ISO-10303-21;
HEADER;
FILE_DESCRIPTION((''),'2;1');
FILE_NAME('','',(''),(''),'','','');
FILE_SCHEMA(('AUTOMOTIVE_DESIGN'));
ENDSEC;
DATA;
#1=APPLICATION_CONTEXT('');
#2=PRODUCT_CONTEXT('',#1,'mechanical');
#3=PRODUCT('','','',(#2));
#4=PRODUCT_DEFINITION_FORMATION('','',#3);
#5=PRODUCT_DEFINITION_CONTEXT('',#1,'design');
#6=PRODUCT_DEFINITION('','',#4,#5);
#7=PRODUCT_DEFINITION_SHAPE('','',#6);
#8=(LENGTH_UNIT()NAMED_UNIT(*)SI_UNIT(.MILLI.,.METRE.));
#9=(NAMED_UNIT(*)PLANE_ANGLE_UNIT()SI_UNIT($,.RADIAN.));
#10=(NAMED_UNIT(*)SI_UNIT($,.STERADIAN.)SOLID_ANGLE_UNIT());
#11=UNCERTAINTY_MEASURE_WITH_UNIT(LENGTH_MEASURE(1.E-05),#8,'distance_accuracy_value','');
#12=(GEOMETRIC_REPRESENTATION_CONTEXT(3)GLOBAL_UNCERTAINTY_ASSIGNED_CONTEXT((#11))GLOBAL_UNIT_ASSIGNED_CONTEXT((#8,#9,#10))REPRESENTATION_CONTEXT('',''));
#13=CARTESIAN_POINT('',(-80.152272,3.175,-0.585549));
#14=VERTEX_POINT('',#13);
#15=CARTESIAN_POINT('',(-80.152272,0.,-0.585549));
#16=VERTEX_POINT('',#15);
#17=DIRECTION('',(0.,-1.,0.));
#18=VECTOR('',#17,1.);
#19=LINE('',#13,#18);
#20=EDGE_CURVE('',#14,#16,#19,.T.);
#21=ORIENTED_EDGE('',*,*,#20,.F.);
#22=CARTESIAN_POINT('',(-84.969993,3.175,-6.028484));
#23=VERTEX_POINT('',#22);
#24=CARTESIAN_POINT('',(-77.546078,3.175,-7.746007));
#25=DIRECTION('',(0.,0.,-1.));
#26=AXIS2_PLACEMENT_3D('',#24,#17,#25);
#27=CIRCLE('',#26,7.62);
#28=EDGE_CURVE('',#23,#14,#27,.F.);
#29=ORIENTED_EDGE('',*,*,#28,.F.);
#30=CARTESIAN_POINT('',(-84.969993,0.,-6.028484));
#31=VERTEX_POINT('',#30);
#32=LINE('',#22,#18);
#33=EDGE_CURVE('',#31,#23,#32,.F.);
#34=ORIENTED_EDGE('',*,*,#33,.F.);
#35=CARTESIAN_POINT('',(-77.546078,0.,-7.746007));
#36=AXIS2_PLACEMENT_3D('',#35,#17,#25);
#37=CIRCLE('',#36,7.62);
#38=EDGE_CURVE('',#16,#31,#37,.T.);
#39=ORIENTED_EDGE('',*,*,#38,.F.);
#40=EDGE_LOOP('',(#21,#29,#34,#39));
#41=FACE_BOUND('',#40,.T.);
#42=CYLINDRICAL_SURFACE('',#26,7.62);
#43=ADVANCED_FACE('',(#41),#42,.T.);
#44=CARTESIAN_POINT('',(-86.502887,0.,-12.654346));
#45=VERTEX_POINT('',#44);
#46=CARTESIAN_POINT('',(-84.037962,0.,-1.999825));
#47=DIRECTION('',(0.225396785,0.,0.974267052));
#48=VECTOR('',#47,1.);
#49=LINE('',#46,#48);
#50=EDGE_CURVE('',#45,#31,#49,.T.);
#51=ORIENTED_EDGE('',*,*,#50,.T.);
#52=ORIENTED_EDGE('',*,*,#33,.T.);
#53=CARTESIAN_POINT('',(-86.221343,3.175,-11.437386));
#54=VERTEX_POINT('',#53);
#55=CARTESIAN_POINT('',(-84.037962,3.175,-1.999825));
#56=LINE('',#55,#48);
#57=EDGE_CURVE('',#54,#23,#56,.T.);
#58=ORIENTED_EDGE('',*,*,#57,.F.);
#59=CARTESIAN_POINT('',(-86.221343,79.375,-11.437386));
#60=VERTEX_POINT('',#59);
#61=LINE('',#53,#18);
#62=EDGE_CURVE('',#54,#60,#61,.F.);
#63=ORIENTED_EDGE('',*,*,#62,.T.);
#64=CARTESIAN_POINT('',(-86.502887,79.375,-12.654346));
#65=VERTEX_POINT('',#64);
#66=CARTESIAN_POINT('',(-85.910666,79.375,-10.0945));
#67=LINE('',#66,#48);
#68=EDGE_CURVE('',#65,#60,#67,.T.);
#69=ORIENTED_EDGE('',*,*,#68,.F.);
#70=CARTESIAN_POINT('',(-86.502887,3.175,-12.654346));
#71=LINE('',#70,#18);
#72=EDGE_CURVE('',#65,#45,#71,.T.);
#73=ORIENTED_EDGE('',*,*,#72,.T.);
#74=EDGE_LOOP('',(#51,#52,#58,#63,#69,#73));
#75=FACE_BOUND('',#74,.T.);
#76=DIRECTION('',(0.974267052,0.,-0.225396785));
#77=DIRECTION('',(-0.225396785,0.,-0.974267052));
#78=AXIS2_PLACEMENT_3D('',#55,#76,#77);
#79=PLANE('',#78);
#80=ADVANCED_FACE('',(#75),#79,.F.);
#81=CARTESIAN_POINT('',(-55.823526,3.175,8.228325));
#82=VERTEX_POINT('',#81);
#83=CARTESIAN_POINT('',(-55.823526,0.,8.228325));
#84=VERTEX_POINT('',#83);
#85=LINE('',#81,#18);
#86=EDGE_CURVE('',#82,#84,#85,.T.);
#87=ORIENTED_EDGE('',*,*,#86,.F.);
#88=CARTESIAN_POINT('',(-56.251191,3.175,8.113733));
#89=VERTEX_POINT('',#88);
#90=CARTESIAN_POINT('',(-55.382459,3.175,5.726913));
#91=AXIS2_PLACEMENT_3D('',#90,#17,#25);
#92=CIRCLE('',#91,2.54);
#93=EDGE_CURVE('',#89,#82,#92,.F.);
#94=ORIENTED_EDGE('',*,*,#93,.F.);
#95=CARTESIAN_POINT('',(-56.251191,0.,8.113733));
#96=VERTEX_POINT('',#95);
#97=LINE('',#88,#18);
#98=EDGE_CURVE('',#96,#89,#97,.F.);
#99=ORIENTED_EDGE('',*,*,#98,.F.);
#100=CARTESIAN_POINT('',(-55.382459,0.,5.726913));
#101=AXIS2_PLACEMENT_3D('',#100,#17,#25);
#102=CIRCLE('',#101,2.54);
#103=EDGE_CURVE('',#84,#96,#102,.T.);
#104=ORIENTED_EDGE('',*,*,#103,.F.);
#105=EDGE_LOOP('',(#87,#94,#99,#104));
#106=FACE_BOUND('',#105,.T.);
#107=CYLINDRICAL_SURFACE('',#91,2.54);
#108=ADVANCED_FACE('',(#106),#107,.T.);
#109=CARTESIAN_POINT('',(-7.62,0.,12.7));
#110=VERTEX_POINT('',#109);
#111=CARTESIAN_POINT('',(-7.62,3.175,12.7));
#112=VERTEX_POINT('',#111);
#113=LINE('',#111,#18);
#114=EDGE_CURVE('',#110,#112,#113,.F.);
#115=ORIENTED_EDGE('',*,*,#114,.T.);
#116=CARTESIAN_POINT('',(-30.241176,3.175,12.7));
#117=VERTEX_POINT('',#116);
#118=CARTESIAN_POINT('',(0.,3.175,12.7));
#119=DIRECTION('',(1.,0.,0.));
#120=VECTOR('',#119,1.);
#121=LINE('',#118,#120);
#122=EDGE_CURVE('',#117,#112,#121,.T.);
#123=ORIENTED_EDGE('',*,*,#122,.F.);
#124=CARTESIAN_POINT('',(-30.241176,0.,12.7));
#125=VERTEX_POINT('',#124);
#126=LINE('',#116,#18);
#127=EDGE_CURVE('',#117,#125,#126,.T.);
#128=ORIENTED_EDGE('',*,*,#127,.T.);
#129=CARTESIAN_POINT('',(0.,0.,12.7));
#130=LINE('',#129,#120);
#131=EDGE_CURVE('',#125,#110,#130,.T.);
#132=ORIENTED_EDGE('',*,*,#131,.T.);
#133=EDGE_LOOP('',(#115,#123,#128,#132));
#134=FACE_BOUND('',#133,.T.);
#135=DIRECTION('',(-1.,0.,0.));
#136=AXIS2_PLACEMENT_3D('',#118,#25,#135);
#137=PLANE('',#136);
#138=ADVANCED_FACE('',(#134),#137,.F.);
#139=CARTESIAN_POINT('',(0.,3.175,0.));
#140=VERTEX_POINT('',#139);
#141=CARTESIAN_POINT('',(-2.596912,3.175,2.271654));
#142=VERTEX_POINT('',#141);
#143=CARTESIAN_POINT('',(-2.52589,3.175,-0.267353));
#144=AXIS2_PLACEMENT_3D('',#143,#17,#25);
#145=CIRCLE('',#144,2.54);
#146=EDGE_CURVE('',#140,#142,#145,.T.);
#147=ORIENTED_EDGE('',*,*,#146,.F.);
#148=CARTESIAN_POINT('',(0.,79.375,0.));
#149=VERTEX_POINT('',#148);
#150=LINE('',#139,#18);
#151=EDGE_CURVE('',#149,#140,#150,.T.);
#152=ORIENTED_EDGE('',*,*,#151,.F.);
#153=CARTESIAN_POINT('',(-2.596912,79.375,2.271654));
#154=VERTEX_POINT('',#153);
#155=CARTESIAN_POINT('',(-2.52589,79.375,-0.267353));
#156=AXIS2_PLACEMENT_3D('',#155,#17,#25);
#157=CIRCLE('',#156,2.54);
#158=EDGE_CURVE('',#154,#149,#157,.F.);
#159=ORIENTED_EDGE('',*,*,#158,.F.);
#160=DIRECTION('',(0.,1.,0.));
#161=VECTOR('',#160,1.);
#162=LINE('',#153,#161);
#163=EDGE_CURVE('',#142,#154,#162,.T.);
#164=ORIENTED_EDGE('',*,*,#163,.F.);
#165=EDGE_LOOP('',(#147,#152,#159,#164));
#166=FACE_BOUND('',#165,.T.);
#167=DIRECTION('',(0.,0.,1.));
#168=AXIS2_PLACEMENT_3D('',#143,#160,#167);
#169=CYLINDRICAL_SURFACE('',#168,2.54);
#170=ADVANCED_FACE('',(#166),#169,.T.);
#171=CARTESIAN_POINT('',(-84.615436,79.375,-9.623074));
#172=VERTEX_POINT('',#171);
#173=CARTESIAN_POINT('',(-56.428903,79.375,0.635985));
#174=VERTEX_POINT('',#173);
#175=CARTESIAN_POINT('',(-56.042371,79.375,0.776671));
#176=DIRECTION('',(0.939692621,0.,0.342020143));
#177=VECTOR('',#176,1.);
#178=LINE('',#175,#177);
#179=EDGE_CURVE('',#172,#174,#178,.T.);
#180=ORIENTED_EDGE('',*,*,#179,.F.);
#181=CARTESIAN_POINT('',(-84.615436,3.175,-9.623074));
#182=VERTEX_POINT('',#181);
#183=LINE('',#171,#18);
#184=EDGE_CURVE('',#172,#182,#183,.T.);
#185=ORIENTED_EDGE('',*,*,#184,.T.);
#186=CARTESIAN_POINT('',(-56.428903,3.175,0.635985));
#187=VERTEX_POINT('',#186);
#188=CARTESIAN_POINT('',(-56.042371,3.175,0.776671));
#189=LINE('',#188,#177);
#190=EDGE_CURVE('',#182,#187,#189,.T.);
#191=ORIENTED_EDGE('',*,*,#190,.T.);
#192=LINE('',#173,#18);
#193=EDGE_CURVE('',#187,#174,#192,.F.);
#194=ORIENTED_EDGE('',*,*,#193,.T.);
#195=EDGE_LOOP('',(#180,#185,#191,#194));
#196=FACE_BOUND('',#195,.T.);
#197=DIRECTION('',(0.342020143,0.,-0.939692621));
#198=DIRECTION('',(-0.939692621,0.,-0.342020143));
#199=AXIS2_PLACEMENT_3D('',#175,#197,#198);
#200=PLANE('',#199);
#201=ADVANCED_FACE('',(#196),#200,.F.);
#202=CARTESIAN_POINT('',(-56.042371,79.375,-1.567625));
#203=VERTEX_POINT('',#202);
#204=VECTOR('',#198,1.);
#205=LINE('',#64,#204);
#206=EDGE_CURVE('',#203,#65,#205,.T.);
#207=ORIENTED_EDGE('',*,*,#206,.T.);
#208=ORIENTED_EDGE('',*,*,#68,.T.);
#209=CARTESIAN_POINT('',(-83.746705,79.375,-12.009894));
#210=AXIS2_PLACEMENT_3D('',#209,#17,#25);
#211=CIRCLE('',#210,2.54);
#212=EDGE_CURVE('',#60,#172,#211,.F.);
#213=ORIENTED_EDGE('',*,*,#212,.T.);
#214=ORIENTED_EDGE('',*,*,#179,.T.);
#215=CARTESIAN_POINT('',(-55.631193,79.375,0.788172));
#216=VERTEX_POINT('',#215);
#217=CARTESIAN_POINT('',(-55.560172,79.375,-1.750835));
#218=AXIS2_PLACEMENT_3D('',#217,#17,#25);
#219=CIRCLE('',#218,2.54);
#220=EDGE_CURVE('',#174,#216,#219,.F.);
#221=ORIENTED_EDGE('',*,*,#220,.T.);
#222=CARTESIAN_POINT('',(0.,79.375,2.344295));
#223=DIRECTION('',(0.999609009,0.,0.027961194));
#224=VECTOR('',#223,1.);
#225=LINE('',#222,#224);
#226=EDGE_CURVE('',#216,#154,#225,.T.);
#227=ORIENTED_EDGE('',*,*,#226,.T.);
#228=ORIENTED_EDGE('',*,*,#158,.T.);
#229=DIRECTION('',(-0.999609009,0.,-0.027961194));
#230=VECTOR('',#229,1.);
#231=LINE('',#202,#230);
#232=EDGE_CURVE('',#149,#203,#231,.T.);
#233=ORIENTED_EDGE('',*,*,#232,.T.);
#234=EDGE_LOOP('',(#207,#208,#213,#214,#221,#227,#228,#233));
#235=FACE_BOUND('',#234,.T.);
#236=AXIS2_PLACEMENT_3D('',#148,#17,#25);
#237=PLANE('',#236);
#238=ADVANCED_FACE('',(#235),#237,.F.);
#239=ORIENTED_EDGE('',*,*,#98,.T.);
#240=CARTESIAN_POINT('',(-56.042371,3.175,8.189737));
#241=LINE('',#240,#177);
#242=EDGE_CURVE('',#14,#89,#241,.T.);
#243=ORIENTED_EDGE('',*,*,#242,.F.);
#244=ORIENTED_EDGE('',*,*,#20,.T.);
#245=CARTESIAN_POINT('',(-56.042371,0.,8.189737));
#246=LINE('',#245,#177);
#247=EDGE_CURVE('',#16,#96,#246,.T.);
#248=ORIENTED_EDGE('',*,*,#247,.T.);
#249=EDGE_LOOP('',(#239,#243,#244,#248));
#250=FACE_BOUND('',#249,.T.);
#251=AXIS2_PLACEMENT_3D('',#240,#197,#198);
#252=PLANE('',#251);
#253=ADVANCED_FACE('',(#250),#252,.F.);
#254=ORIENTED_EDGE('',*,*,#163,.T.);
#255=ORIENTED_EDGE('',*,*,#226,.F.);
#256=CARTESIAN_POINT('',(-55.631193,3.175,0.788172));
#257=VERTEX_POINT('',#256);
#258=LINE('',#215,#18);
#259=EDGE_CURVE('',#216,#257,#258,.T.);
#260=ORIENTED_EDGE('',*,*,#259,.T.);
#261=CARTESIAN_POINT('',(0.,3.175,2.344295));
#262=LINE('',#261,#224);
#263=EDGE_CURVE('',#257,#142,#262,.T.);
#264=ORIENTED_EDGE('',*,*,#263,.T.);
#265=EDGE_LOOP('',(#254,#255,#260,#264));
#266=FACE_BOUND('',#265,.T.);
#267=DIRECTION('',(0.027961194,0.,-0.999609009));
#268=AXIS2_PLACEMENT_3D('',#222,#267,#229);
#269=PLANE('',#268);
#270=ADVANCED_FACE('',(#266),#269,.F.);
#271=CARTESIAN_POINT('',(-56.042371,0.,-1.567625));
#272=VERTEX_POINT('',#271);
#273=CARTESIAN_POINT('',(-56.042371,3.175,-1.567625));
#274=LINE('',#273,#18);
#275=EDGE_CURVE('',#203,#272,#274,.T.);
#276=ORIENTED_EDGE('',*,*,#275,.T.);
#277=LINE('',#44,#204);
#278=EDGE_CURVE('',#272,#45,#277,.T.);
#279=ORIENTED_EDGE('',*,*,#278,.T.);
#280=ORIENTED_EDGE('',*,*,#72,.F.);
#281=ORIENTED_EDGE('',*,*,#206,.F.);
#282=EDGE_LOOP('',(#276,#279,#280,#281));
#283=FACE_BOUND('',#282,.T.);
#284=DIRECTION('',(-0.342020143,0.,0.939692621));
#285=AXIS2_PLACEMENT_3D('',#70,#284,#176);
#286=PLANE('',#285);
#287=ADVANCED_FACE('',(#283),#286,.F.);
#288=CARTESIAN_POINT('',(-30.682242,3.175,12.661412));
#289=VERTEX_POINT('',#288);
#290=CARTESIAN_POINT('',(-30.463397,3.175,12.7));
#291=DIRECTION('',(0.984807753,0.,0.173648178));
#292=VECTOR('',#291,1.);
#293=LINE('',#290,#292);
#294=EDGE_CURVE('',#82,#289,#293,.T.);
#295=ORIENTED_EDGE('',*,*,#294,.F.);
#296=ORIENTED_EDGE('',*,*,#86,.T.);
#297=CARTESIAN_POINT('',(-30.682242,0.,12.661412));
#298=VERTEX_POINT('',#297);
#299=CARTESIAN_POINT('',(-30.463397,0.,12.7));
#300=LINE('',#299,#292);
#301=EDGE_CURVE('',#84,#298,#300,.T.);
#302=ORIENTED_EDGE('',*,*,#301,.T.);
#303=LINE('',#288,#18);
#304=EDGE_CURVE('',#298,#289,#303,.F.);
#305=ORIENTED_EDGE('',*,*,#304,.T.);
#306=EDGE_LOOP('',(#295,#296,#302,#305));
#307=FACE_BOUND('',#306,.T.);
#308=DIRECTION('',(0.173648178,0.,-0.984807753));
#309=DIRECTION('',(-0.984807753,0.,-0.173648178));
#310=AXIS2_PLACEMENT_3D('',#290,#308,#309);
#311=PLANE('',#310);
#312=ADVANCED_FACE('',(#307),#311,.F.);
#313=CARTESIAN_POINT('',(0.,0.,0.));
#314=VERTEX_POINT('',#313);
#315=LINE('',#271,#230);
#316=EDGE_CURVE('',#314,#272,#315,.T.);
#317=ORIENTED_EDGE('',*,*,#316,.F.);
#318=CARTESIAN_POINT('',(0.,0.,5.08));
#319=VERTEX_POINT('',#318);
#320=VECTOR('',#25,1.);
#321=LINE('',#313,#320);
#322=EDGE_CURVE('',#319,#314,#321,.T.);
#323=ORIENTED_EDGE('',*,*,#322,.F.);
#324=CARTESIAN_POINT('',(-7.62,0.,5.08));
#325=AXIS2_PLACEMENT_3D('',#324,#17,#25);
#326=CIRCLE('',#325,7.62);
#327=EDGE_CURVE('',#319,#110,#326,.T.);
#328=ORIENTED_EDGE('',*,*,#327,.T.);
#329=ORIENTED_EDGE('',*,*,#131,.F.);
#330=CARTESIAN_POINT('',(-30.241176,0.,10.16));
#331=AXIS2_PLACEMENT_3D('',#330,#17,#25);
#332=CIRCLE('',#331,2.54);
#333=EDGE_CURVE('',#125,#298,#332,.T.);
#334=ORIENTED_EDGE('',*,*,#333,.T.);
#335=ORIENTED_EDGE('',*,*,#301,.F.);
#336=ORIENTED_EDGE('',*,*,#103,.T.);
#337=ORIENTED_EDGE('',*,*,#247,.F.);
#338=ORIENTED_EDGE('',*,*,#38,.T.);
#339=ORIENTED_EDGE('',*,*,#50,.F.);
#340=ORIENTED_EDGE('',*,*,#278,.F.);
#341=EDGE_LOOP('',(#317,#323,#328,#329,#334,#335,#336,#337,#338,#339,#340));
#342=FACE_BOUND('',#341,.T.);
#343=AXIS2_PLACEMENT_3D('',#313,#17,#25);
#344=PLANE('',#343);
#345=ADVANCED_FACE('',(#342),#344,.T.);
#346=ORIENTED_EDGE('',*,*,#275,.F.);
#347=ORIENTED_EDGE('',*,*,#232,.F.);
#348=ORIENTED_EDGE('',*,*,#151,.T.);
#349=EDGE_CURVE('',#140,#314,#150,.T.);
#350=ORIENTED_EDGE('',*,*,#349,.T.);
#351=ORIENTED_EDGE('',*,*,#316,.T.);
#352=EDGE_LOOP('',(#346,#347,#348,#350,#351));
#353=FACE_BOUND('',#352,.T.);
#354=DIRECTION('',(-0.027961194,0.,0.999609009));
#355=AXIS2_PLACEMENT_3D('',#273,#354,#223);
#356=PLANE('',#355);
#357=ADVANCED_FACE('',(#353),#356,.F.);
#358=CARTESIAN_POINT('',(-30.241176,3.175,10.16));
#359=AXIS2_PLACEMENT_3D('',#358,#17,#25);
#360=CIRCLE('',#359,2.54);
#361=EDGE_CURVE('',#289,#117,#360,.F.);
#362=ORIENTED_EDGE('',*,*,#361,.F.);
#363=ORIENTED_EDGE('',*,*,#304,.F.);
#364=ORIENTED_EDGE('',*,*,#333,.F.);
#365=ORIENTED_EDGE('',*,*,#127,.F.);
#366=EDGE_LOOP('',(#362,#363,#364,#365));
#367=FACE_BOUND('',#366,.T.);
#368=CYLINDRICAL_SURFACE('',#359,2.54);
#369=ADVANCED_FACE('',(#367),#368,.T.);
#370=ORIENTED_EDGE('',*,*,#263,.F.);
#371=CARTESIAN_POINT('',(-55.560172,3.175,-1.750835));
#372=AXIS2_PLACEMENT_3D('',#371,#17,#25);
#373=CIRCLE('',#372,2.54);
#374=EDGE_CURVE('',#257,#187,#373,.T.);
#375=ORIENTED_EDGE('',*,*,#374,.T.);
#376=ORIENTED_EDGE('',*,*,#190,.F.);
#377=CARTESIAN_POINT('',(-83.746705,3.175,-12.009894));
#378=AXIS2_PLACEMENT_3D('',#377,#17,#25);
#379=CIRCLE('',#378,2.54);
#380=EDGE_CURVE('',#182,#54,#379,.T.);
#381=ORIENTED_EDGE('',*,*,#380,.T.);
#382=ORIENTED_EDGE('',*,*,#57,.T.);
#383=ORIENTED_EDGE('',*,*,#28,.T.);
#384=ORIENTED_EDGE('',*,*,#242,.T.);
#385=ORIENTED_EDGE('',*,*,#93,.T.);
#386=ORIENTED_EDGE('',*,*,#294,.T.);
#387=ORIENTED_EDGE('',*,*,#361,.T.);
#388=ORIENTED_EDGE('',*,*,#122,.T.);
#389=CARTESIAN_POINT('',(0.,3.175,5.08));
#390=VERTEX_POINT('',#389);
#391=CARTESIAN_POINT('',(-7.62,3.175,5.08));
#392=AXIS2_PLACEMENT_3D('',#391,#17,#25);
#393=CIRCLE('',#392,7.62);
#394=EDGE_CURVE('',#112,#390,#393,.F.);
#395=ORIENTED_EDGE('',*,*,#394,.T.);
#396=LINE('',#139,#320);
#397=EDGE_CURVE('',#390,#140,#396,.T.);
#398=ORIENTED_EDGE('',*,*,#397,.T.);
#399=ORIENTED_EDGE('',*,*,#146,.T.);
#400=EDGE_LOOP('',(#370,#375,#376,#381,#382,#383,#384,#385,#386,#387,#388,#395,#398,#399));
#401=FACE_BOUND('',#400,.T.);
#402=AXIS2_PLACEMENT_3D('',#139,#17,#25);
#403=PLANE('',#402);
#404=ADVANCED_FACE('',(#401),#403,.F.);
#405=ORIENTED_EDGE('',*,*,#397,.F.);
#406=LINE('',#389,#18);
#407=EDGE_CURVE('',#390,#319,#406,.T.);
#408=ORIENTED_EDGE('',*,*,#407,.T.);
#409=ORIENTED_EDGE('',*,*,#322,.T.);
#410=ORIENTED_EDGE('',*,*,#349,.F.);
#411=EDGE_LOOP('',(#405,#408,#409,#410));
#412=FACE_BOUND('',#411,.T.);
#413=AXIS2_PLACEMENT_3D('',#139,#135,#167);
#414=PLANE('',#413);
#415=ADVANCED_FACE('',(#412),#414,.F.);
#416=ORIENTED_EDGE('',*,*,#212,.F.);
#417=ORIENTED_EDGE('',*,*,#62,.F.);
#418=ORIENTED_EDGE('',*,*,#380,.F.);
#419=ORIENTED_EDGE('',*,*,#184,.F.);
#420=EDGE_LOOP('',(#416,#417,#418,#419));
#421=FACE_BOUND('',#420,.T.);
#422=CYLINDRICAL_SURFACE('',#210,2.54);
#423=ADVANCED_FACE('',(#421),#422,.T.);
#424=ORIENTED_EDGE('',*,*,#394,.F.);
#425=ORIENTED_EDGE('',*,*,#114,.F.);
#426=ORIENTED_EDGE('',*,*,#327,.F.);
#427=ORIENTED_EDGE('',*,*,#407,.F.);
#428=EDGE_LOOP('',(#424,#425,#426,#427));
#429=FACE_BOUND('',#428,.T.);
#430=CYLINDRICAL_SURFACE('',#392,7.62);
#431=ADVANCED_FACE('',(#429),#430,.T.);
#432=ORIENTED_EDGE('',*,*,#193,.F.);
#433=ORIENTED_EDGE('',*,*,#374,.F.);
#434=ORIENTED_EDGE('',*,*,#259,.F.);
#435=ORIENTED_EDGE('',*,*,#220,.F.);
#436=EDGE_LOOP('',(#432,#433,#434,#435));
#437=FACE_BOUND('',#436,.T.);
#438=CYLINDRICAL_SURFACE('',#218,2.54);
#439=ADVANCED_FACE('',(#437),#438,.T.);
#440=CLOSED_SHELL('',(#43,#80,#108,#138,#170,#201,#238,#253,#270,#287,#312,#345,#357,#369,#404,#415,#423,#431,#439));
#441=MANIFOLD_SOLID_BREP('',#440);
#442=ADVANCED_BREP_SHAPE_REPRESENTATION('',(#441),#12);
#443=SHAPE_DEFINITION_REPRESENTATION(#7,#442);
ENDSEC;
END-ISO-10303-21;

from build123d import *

# Parameters (mm, degrees)
GAGE_PLATE_SIDE_EXTRUDE_DEPTH = 3.175
BOSS_EXTRUDE2_DEPTH           = 76.2
FILLET1_R                     = 2.54
FILLET2_R                     = 7.62


with BuildPart() as part:
    # Sketch1 → Gage Plate-side Extrude (new body)
    with BuildSketch(Plane(origin=(0, 0, 0), x_dir=(1, 0, 0), z_dir=(0, 1, 0))):
        Polygon((0, 0), (0, -12.7), (-30.463396962, -12.7), (-56.042370913, -8.189736754), (-84.03796246, 1.99982526), (-86.502886868, 12.65434565), (-56.042370913, 1.567624522), align=None)
    extrude(amount=GAGE_PLATE_SIDE_EXTRUDE_DEPTH)

    # Sketch2 → Boss-Extrude2 (add)
    with BuildSketch(Plane(origin=(0, 3.175, 0), x_dir=(1, 0, 0), z_dir=(0, 1, 0))):
        Polygon((0, 0), (0, -2.344295335), (-56.042370913, -0.776670813), (-85.910666223, 10.094499628), (-86.502886868, 12.65434565), (-56.042370913, 1.567624522), align=None)
    extrude(amount=BOSS_EXTRUDE2_DEPTH)

    # Fillet1
    # the kernel refuses this fillet: 2.54 mm, written as the material it takes off along each edge
    with BuildSketch(Plane(origin=(-30.463396962, -0.555553013, 12.7), x_dir=(-0.9848077530122088, 0, -0.17364817766692622), z_dir=(0, 1, 0)), Plane(origin=(-56.042370913, -0.555553013, 8.189736754), x_dir=(-0.9396926207859081, 0, -0.3420201433256695), z_dir=(0, 1, 0))) as fillet1_piece_1:
        with BuildLine():
            CenterArc((FILLET1_R * 0.0874886635259, -FILLET1_R), FILLET1_R, 90, 10)
            Line((-FILLET1_R * 0.086159514141, -FILLET1_R * 0.0151922469878), (0, 0))
            Line((0, 0), (FILLET1_R * 0.0874886635259, 0))
        make_face()
    extrude(amount=4.286106027, mode=Mode.SUBTRACT)
    with BuildSketch(Plane(origin=(-56.042370913, 3.175, 0.776670813), x_dir=(-0.9396926207859059, 0, -0.3420201433256751), z_dir=(0, 1, 0))) as fillet1_piece_2:
        with BuildLine():
            CenterArc((FILLET1_R * 0.161944353893, -FILLET1_R), FILLET1_R, 90, 18.397732774)
            Line((-FILLET1_R * 0.153667135261, -FILLET1_R * 0.0511114986921), (0, 0))
            Line((0, 0), (FILLET1_R * 0.161944353893, 0))
        make_face()
    extrude(amount=77.228346647, mode=Mode.SUBTRACT)
    with BuildSketch(Plane(origin=(0, 3.175, 2.344295335), x_dir=(0, 0, -1), z_dir=(0, 1, 0))) as fillet1_piece_3:
        with BuildLine():
            CenterArc((2.611648042, 2.525890443), FILLET1_R, 178.397732774, 85.560295248)
            Line((0.072641158, 2.596911875), (0, 0))
            Line((0, 0), (2.344295335, 0))
        make_face()
    extrude(amount=82.694819102, mode=Mode.SUBTRACT)
    with BuildSketch(Plane(origin=(-85.910666223, 3.175, -10.094499628), x_dir=(-0.22539678463569066, 0, -0.9742670524429594), z_dir=(0, 1, 0))) as fillet1_piece_4:
        with BuildLine():
            CenterArc((FILLET1_R * 0.542659564301, -FILLET1_R), FILLET1_R, 90, 56.973788384)
            Line((-FILLET1_R * 0.295761754969, -FILLET1_R * 0.454977347815), (0, 0))
            Line((0, 0), (FILLET1_R * 0.542659564301, 0))
        make_face()
    extrude(amount=79.645888233, mode=Mode.SUBTRACT)

    # Fillet2
    fillet2_edges = [part.edges().sort_by_distance(p)[0] for p in [
        (0, 1.5875, 12.7),
        (-84.03796246, 1.5875, -1.99982526),
    ]]
    fillet(fillet2_edges, radius=FILLET2_R)


solid = part.part
